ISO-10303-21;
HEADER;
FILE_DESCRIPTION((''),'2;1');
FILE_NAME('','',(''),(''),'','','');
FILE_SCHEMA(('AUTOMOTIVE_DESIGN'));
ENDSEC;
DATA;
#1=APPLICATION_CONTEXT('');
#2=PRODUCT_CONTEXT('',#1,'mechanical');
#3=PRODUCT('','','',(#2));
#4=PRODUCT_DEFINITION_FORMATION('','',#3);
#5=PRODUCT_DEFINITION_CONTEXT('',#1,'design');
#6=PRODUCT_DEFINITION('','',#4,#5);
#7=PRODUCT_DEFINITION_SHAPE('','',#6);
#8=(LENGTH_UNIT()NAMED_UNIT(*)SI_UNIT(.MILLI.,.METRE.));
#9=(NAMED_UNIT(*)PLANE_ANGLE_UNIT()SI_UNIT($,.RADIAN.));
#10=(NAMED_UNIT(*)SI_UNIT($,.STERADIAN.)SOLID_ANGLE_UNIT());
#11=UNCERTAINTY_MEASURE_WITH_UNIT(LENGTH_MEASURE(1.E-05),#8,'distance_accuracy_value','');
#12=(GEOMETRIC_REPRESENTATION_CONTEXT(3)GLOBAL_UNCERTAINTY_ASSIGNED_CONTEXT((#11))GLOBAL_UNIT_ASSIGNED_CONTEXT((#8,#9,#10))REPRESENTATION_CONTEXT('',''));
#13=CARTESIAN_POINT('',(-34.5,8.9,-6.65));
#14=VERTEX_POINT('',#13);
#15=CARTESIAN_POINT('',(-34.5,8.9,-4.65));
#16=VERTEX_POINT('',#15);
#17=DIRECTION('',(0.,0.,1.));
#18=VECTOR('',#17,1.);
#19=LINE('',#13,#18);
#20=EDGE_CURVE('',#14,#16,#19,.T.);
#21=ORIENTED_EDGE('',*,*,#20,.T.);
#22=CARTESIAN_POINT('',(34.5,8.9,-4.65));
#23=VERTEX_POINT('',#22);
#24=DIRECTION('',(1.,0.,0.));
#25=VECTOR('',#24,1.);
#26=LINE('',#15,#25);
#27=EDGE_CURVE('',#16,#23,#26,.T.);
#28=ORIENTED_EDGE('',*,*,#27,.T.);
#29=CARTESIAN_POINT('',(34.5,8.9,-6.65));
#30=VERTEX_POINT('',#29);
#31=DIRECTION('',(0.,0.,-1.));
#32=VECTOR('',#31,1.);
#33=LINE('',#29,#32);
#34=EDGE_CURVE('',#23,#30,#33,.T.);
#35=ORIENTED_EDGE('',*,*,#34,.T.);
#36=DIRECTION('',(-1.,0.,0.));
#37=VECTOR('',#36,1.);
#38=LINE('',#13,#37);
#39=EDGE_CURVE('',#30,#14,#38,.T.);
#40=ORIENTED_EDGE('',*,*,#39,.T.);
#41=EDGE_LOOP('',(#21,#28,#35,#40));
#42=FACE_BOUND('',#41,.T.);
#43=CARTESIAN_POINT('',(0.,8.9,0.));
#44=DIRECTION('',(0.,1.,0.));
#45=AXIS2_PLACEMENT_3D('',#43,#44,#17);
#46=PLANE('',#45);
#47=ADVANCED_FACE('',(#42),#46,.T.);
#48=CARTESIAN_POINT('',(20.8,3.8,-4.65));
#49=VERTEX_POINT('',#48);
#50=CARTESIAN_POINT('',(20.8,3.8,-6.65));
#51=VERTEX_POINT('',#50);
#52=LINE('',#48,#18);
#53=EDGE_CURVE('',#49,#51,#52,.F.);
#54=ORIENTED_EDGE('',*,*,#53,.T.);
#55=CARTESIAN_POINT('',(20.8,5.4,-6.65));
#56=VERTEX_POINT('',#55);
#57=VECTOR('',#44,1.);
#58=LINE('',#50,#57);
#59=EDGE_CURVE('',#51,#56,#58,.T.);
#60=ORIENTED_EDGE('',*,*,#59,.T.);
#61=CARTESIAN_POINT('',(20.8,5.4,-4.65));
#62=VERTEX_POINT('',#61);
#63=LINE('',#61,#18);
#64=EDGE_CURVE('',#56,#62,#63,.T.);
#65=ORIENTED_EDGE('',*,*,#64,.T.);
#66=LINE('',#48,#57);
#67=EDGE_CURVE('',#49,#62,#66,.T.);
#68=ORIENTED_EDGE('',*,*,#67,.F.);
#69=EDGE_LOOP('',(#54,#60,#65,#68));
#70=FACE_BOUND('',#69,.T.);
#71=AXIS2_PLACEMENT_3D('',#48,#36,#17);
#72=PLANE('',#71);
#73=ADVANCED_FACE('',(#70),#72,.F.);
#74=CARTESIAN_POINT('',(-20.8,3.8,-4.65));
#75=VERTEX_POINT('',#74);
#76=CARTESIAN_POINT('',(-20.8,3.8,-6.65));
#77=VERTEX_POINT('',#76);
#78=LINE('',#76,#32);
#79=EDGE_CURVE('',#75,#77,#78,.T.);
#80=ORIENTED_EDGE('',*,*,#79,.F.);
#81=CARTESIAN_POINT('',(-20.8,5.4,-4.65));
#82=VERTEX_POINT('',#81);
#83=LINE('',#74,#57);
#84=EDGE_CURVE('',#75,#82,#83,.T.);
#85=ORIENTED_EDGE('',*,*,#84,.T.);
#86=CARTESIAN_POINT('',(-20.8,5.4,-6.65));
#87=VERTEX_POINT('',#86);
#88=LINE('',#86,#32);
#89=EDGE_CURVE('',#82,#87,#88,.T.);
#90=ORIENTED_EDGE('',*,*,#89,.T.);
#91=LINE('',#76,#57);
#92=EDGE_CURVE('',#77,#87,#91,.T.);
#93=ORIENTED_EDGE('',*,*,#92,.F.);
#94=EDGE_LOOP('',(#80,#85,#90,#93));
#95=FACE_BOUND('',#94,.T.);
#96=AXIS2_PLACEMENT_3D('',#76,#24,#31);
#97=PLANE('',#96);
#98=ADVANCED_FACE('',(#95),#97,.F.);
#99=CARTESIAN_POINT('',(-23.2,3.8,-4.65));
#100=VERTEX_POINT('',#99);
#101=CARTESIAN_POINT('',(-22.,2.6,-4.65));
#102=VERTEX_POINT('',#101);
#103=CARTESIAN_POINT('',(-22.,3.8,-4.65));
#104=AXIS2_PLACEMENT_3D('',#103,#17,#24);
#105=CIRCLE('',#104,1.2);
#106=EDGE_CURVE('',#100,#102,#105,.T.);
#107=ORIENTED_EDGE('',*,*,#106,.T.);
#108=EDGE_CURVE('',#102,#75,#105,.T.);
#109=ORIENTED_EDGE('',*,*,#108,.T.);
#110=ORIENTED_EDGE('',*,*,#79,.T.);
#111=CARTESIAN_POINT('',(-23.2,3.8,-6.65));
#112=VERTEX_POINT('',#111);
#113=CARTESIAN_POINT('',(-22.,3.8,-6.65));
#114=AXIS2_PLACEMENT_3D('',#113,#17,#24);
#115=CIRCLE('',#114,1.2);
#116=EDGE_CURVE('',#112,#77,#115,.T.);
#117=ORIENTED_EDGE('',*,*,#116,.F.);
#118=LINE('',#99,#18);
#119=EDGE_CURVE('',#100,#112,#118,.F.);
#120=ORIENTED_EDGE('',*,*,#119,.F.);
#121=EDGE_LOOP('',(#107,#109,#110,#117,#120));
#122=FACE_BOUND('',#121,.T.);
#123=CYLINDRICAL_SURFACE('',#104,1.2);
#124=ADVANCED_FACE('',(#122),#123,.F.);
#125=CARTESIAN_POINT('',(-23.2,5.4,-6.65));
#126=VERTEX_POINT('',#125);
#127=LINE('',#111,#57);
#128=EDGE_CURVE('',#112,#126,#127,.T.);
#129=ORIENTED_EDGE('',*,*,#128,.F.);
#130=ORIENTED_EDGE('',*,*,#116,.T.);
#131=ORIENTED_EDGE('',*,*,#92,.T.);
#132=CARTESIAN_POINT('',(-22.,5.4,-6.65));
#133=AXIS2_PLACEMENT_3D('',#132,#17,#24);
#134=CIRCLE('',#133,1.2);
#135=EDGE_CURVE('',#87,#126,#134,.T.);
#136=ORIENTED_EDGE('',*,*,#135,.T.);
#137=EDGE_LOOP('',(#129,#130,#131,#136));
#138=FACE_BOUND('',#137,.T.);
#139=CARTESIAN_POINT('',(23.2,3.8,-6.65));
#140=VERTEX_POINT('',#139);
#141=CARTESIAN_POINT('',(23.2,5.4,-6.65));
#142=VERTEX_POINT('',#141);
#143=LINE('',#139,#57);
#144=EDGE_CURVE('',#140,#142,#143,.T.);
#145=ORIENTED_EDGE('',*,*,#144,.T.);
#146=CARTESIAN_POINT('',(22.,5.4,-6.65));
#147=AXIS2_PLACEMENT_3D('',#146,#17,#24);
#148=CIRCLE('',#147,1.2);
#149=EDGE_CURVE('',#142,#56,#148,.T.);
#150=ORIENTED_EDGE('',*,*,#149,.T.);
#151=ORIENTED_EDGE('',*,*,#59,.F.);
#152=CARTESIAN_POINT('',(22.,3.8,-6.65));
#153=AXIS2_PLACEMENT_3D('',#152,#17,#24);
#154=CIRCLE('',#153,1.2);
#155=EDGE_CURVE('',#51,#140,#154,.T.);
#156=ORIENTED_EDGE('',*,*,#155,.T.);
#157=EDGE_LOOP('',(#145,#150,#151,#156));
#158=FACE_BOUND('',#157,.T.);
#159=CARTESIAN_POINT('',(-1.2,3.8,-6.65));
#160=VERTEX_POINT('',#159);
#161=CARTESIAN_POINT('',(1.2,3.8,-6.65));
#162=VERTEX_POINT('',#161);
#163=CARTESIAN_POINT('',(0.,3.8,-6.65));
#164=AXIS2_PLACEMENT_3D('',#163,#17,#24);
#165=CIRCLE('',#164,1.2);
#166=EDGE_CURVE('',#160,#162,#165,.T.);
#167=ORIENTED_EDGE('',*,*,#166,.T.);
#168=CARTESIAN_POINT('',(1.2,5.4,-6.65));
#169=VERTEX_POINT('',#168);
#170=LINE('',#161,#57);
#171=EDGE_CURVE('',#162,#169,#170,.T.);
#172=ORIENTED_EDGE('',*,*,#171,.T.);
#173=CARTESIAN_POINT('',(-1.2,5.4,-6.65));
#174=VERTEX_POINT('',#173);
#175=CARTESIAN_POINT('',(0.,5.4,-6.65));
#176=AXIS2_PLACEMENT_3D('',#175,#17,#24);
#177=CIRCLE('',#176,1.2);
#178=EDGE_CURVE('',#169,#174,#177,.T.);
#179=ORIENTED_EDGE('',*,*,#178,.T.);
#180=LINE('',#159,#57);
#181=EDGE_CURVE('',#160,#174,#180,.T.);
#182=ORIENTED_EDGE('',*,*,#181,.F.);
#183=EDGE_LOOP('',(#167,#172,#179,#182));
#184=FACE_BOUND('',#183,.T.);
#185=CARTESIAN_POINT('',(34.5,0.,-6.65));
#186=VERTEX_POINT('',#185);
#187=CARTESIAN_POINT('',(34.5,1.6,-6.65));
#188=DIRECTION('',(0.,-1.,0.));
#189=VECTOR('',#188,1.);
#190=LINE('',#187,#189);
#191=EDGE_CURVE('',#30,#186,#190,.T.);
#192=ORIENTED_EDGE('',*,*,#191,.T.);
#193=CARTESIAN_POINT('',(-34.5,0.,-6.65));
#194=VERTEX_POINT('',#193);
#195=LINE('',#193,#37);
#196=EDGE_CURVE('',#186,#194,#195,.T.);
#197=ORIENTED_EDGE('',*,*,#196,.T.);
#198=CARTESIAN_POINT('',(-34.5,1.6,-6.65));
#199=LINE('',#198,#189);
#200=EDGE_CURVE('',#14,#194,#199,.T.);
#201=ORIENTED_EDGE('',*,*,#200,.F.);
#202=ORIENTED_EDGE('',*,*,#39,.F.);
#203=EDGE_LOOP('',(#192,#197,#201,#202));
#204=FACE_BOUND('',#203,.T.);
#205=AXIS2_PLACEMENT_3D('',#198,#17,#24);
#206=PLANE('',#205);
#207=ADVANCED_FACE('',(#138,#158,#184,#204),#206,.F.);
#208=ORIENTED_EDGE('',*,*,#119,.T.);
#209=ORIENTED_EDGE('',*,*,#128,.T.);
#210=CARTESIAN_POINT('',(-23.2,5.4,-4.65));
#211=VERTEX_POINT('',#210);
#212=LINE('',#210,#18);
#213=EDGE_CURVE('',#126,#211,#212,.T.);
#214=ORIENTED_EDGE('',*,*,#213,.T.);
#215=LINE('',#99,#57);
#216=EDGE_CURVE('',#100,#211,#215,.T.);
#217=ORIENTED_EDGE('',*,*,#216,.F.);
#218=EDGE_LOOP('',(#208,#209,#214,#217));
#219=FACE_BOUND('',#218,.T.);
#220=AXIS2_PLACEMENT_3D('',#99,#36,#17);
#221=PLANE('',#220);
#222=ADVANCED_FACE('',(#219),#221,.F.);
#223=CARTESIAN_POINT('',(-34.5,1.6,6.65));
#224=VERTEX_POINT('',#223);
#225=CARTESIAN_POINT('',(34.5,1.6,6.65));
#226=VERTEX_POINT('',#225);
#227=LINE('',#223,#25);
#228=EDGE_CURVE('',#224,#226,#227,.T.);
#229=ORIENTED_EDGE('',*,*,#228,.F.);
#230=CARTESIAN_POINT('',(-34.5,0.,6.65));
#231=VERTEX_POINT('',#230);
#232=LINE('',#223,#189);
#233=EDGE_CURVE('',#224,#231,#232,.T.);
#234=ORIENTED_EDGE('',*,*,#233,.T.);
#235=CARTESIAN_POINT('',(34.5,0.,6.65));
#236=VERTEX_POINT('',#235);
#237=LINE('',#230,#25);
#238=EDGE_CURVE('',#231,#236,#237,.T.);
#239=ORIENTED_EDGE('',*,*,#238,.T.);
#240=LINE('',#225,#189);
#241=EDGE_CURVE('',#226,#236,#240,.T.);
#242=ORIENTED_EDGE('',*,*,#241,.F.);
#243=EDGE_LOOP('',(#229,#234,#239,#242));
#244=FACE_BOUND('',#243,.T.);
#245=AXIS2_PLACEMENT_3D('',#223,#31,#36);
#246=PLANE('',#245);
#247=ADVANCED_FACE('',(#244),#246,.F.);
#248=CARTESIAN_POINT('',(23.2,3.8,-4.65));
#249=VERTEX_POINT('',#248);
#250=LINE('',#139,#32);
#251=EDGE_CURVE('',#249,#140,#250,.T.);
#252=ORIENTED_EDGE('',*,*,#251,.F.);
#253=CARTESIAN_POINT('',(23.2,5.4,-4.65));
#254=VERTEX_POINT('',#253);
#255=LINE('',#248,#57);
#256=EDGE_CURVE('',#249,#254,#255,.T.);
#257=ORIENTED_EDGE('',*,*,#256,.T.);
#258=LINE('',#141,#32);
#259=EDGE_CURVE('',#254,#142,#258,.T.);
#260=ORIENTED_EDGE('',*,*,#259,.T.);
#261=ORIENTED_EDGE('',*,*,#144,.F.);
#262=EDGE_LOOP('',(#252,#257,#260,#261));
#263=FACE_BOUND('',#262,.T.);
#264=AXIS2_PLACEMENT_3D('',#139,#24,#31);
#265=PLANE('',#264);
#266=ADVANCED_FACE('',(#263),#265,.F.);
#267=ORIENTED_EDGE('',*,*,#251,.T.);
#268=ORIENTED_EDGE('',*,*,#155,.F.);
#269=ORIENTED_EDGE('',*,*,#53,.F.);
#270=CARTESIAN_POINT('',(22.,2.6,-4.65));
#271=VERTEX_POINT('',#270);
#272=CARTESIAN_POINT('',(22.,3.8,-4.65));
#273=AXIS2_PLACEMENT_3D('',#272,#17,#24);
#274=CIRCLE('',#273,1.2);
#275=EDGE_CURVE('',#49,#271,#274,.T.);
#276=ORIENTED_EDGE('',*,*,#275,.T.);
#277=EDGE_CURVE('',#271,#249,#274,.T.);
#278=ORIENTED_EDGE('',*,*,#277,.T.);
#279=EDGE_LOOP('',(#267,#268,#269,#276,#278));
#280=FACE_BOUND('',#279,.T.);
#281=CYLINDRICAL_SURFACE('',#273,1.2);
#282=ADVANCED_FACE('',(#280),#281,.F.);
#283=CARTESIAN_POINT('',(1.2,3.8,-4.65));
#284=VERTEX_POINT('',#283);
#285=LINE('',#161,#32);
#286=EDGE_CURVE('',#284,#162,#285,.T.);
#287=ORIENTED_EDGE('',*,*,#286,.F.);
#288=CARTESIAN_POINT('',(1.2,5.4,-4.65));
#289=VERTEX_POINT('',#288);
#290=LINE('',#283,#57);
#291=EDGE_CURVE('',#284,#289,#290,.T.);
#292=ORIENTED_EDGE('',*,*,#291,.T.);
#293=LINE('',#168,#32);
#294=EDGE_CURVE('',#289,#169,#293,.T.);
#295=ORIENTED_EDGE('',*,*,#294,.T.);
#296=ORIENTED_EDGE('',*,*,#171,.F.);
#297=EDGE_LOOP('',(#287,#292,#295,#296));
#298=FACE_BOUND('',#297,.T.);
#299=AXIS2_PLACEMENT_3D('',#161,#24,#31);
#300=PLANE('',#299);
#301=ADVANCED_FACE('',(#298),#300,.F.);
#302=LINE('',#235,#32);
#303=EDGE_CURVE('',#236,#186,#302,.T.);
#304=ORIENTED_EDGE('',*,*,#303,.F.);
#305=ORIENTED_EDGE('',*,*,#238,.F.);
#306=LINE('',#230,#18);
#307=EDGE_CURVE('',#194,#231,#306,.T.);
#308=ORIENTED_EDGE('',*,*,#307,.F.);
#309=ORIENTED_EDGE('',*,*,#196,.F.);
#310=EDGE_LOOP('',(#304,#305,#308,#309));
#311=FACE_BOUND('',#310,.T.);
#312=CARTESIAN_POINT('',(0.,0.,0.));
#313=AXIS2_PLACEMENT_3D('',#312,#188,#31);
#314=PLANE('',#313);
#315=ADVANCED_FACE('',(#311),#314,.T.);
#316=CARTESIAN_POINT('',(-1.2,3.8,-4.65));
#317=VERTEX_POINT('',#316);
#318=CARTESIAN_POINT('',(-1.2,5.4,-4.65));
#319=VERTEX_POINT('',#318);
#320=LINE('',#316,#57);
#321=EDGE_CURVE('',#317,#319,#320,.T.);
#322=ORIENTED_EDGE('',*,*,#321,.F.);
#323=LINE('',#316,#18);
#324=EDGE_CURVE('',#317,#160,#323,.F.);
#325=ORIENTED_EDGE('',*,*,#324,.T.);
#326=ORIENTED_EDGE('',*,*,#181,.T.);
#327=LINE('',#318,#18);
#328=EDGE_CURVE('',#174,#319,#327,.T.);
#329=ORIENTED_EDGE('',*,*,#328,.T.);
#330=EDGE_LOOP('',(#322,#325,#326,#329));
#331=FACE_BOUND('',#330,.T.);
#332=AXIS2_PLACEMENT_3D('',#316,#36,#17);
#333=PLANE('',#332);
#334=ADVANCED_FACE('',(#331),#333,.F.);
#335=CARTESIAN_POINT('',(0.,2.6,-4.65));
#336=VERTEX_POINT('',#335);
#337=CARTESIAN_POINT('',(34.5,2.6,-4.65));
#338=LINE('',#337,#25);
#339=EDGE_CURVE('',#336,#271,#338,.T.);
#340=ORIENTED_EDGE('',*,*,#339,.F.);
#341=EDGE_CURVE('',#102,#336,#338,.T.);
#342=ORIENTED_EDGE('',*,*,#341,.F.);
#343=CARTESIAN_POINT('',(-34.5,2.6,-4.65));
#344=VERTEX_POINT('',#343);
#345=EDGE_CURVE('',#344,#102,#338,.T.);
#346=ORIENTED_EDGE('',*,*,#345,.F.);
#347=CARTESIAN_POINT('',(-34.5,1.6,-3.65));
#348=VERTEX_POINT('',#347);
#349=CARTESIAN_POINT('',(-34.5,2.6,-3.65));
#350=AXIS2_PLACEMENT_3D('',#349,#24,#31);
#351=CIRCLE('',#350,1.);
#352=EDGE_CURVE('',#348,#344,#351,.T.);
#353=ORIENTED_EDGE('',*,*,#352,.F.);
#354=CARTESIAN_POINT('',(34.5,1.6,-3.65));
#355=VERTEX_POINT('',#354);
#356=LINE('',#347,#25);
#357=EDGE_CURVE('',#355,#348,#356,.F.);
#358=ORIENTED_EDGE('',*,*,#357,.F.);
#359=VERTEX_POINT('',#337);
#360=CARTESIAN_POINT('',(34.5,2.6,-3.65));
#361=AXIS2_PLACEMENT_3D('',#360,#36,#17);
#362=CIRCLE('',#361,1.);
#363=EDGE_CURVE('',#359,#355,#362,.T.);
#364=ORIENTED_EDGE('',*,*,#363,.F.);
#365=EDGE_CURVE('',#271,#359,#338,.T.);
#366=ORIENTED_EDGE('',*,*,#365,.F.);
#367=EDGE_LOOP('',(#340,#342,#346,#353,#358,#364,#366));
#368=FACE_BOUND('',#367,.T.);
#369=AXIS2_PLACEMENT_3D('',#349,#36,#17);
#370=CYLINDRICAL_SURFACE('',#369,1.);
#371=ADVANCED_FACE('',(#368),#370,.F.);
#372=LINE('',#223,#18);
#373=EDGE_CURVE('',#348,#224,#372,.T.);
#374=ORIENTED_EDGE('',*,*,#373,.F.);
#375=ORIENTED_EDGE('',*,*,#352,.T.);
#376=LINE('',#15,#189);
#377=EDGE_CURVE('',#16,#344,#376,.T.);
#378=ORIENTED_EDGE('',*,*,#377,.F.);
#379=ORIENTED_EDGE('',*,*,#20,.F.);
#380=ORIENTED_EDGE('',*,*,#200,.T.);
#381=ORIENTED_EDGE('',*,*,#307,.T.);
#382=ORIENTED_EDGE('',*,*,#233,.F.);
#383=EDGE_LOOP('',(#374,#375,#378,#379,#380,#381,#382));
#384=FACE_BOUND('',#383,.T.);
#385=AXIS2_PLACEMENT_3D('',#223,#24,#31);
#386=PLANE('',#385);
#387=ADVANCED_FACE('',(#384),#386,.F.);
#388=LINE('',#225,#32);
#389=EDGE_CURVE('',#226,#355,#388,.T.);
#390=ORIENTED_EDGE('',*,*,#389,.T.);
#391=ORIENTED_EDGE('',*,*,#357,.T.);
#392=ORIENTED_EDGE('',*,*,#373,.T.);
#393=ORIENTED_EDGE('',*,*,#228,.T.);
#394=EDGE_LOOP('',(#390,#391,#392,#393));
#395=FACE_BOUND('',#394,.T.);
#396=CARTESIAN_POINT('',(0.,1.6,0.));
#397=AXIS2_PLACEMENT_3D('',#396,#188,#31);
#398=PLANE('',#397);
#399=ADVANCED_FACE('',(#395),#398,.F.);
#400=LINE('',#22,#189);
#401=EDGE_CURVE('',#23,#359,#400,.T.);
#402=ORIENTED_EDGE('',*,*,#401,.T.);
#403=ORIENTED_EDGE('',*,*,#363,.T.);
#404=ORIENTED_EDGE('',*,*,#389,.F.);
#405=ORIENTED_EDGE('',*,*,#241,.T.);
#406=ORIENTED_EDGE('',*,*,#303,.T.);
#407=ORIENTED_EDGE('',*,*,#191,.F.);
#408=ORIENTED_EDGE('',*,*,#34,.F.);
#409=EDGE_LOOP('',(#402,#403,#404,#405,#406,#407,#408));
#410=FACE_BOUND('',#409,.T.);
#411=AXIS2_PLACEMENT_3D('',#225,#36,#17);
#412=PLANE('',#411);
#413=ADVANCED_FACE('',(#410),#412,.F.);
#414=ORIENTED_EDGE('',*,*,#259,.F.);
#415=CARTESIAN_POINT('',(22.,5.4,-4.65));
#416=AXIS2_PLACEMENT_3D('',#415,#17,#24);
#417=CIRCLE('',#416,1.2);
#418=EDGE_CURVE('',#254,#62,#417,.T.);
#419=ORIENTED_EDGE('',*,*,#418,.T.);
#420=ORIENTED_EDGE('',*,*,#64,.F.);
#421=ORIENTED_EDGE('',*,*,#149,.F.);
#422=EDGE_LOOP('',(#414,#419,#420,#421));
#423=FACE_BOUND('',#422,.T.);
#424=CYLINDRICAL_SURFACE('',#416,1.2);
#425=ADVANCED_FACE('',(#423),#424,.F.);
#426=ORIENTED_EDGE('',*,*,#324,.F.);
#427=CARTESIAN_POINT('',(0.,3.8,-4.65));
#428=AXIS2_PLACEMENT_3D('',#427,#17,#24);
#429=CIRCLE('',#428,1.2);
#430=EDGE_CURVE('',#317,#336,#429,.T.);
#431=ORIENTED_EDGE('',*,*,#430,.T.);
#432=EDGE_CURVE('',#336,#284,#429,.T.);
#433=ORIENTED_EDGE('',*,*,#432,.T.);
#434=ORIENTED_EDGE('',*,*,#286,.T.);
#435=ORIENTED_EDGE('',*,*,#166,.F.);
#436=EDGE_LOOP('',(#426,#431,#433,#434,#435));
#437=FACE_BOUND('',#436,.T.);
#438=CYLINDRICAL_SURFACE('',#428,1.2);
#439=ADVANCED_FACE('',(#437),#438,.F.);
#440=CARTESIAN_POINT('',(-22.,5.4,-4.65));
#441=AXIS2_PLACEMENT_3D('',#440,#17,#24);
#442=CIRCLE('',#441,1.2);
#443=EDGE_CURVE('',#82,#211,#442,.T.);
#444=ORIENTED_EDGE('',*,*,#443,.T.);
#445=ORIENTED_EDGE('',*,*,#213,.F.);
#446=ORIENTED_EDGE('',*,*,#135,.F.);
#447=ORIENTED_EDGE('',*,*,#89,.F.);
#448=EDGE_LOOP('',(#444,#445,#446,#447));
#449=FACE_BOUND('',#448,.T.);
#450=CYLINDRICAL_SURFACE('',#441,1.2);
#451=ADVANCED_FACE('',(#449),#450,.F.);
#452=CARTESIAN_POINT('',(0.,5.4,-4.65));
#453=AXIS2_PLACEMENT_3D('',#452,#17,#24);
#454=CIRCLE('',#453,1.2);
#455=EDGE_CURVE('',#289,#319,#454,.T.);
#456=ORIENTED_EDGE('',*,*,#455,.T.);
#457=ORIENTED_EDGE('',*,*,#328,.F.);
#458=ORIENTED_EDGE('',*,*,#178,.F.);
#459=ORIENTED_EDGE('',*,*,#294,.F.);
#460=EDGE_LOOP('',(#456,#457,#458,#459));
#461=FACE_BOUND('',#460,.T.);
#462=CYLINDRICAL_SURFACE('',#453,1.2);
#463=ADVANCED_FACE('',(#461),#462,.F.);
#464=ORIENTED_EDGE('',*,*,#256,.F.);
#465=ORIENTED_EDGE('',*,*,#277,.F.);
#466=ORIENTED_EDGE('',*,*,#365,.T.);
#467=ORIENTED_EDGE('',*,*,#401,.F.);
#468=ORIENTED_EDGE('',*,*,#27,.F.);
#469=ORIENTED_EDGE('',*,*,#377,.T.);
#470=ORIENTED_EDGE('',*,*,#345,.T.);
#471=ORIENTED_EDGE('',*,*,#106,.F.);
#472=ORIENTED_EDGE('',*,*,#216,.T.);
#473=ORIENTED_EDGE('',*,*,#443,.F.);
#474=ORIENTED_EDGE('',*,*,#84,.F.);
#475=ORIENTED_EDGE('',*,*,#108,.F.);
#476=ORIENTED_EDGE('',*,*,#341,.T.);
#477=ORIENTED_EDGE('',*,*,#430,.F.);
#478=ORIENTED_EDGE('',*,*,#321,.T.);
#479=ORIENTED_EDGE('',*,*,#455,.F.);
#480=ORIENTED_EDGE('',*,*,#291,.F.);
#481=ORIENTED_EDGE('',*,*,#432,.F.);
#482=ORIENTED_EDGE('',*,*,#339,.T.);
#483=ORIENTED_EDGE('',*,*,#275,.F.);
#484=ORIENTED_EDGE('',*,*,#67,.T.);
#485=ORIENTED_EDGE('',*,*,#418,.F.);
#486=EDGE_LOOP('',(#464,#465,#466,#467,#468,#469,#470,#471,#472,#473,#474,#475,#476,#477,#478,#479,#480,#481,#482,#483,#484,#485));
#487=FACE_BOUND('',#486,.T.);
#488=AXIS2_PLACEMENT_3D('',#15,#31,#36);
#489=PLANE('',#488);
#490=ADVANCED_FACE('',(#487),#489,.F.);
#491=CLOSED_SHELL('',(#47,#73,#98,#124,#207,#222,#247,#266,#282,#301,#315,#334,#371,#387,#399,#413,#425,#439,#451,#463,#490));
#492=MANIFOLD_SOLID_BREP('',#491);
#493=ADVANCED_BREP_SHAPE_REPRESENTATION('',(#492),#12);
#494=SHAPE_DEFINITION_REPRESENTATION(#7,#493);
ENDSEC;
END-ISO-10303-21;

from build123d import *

# Parameters (mm, degrees)
SKETCH1_W                = 69
SKETCH1_H                = 13.3
BOSS_EXTRUDE1_DEPTH      = 1.6
SKETCH2_W                = 69
SKETCH2_H                = 2
BOSS_EXTRUDE2_DEPTH      = 7.3
FILLET1_R                = 1
M2_START                 = -6.65
M2_CLEARANCE_SLOT1_DEPTH = 2


# Read off the part's stored shape, not the designer's step: M2 Clearance Slot1
with BuildPart() as part:
    # Sketch1 → Boss-Extrude1 (new body)
    with BuildSketch(Plane(origin=(0, 0, 0), x_dir=(1, 0, 0), z_dir=(0, 1, 0))):
        Rectangle(SKETCH1_W, SKETCH1_H)
    extrude(amount=BOSS_EXTRUDE1_DEPTH)

    # Sketch2 → Boss-Extrude2 (add)
    with BuildSketch(Plane(origin=(0, 1.6, 0), x_dir=(1, 0, 0), z_dir=(0, 1, 0))):
        with Locations((0, 5.65)):
            Rectangle(SKETCH2_W, SKETCH2_H)
    extrude(amount=BOSS_EXTRUDE2_DEPTH)

    # Fillet1
    fillet1_edges = [part.edges().sort_by_distance(p)[0] for p in [
        (0, 1.6, -4.65),
    ]]
    fillet(fillet1_edges, radius=FILLET1_R)

    # M2 Clearance Slot1 outline → M2 Clearance Slot1 (cut)
    with BuildSketch(Plane.XY.offset(M2_START)):
        with BuildLine():
            Line((23.2, 3.8), (23.2, 5.4))
            ThreePointArc((23.2, 5.4), (22, 6.6), (20.8, 5.4))
            Line((20.8, 5.4), (20.8, 3.8))
            ThreePointArc((20.8, 3.8), (22, 2.6), (23.2, 3.8))
        make_face()
        with BuildLine():
            Line((1.2, 3.8), (1.2, 5.4))
            ThreePointArc((1.2, 5.4), (0, 6.6), (-1.2, 5.4))
            Line((-1.2, 5.4), (-1.2, 3.8))
            ThreePointArc((-1.2, 3.8), (0, 2.6), (1.2, 3.8))
        make_face()
        with BuildLine():
            Line((-20.8, 3.8), (-20.8, 5.4))
            ThreePointArc((-20.8, 5.4), (-22, 6.6), (-23.2, 5.4))
            Line((-23.2, 5.4), (-23.2, 3.8))
            ThreePointArc((-23.2, 3.8), (-22, 2.6), (-20.8, 3.8))
        make_face()
    extrude(amount=M2_CLEARANCE_SLOT1_DEPTH, mode=Mode.SUBTRACT)


solid = part.part
